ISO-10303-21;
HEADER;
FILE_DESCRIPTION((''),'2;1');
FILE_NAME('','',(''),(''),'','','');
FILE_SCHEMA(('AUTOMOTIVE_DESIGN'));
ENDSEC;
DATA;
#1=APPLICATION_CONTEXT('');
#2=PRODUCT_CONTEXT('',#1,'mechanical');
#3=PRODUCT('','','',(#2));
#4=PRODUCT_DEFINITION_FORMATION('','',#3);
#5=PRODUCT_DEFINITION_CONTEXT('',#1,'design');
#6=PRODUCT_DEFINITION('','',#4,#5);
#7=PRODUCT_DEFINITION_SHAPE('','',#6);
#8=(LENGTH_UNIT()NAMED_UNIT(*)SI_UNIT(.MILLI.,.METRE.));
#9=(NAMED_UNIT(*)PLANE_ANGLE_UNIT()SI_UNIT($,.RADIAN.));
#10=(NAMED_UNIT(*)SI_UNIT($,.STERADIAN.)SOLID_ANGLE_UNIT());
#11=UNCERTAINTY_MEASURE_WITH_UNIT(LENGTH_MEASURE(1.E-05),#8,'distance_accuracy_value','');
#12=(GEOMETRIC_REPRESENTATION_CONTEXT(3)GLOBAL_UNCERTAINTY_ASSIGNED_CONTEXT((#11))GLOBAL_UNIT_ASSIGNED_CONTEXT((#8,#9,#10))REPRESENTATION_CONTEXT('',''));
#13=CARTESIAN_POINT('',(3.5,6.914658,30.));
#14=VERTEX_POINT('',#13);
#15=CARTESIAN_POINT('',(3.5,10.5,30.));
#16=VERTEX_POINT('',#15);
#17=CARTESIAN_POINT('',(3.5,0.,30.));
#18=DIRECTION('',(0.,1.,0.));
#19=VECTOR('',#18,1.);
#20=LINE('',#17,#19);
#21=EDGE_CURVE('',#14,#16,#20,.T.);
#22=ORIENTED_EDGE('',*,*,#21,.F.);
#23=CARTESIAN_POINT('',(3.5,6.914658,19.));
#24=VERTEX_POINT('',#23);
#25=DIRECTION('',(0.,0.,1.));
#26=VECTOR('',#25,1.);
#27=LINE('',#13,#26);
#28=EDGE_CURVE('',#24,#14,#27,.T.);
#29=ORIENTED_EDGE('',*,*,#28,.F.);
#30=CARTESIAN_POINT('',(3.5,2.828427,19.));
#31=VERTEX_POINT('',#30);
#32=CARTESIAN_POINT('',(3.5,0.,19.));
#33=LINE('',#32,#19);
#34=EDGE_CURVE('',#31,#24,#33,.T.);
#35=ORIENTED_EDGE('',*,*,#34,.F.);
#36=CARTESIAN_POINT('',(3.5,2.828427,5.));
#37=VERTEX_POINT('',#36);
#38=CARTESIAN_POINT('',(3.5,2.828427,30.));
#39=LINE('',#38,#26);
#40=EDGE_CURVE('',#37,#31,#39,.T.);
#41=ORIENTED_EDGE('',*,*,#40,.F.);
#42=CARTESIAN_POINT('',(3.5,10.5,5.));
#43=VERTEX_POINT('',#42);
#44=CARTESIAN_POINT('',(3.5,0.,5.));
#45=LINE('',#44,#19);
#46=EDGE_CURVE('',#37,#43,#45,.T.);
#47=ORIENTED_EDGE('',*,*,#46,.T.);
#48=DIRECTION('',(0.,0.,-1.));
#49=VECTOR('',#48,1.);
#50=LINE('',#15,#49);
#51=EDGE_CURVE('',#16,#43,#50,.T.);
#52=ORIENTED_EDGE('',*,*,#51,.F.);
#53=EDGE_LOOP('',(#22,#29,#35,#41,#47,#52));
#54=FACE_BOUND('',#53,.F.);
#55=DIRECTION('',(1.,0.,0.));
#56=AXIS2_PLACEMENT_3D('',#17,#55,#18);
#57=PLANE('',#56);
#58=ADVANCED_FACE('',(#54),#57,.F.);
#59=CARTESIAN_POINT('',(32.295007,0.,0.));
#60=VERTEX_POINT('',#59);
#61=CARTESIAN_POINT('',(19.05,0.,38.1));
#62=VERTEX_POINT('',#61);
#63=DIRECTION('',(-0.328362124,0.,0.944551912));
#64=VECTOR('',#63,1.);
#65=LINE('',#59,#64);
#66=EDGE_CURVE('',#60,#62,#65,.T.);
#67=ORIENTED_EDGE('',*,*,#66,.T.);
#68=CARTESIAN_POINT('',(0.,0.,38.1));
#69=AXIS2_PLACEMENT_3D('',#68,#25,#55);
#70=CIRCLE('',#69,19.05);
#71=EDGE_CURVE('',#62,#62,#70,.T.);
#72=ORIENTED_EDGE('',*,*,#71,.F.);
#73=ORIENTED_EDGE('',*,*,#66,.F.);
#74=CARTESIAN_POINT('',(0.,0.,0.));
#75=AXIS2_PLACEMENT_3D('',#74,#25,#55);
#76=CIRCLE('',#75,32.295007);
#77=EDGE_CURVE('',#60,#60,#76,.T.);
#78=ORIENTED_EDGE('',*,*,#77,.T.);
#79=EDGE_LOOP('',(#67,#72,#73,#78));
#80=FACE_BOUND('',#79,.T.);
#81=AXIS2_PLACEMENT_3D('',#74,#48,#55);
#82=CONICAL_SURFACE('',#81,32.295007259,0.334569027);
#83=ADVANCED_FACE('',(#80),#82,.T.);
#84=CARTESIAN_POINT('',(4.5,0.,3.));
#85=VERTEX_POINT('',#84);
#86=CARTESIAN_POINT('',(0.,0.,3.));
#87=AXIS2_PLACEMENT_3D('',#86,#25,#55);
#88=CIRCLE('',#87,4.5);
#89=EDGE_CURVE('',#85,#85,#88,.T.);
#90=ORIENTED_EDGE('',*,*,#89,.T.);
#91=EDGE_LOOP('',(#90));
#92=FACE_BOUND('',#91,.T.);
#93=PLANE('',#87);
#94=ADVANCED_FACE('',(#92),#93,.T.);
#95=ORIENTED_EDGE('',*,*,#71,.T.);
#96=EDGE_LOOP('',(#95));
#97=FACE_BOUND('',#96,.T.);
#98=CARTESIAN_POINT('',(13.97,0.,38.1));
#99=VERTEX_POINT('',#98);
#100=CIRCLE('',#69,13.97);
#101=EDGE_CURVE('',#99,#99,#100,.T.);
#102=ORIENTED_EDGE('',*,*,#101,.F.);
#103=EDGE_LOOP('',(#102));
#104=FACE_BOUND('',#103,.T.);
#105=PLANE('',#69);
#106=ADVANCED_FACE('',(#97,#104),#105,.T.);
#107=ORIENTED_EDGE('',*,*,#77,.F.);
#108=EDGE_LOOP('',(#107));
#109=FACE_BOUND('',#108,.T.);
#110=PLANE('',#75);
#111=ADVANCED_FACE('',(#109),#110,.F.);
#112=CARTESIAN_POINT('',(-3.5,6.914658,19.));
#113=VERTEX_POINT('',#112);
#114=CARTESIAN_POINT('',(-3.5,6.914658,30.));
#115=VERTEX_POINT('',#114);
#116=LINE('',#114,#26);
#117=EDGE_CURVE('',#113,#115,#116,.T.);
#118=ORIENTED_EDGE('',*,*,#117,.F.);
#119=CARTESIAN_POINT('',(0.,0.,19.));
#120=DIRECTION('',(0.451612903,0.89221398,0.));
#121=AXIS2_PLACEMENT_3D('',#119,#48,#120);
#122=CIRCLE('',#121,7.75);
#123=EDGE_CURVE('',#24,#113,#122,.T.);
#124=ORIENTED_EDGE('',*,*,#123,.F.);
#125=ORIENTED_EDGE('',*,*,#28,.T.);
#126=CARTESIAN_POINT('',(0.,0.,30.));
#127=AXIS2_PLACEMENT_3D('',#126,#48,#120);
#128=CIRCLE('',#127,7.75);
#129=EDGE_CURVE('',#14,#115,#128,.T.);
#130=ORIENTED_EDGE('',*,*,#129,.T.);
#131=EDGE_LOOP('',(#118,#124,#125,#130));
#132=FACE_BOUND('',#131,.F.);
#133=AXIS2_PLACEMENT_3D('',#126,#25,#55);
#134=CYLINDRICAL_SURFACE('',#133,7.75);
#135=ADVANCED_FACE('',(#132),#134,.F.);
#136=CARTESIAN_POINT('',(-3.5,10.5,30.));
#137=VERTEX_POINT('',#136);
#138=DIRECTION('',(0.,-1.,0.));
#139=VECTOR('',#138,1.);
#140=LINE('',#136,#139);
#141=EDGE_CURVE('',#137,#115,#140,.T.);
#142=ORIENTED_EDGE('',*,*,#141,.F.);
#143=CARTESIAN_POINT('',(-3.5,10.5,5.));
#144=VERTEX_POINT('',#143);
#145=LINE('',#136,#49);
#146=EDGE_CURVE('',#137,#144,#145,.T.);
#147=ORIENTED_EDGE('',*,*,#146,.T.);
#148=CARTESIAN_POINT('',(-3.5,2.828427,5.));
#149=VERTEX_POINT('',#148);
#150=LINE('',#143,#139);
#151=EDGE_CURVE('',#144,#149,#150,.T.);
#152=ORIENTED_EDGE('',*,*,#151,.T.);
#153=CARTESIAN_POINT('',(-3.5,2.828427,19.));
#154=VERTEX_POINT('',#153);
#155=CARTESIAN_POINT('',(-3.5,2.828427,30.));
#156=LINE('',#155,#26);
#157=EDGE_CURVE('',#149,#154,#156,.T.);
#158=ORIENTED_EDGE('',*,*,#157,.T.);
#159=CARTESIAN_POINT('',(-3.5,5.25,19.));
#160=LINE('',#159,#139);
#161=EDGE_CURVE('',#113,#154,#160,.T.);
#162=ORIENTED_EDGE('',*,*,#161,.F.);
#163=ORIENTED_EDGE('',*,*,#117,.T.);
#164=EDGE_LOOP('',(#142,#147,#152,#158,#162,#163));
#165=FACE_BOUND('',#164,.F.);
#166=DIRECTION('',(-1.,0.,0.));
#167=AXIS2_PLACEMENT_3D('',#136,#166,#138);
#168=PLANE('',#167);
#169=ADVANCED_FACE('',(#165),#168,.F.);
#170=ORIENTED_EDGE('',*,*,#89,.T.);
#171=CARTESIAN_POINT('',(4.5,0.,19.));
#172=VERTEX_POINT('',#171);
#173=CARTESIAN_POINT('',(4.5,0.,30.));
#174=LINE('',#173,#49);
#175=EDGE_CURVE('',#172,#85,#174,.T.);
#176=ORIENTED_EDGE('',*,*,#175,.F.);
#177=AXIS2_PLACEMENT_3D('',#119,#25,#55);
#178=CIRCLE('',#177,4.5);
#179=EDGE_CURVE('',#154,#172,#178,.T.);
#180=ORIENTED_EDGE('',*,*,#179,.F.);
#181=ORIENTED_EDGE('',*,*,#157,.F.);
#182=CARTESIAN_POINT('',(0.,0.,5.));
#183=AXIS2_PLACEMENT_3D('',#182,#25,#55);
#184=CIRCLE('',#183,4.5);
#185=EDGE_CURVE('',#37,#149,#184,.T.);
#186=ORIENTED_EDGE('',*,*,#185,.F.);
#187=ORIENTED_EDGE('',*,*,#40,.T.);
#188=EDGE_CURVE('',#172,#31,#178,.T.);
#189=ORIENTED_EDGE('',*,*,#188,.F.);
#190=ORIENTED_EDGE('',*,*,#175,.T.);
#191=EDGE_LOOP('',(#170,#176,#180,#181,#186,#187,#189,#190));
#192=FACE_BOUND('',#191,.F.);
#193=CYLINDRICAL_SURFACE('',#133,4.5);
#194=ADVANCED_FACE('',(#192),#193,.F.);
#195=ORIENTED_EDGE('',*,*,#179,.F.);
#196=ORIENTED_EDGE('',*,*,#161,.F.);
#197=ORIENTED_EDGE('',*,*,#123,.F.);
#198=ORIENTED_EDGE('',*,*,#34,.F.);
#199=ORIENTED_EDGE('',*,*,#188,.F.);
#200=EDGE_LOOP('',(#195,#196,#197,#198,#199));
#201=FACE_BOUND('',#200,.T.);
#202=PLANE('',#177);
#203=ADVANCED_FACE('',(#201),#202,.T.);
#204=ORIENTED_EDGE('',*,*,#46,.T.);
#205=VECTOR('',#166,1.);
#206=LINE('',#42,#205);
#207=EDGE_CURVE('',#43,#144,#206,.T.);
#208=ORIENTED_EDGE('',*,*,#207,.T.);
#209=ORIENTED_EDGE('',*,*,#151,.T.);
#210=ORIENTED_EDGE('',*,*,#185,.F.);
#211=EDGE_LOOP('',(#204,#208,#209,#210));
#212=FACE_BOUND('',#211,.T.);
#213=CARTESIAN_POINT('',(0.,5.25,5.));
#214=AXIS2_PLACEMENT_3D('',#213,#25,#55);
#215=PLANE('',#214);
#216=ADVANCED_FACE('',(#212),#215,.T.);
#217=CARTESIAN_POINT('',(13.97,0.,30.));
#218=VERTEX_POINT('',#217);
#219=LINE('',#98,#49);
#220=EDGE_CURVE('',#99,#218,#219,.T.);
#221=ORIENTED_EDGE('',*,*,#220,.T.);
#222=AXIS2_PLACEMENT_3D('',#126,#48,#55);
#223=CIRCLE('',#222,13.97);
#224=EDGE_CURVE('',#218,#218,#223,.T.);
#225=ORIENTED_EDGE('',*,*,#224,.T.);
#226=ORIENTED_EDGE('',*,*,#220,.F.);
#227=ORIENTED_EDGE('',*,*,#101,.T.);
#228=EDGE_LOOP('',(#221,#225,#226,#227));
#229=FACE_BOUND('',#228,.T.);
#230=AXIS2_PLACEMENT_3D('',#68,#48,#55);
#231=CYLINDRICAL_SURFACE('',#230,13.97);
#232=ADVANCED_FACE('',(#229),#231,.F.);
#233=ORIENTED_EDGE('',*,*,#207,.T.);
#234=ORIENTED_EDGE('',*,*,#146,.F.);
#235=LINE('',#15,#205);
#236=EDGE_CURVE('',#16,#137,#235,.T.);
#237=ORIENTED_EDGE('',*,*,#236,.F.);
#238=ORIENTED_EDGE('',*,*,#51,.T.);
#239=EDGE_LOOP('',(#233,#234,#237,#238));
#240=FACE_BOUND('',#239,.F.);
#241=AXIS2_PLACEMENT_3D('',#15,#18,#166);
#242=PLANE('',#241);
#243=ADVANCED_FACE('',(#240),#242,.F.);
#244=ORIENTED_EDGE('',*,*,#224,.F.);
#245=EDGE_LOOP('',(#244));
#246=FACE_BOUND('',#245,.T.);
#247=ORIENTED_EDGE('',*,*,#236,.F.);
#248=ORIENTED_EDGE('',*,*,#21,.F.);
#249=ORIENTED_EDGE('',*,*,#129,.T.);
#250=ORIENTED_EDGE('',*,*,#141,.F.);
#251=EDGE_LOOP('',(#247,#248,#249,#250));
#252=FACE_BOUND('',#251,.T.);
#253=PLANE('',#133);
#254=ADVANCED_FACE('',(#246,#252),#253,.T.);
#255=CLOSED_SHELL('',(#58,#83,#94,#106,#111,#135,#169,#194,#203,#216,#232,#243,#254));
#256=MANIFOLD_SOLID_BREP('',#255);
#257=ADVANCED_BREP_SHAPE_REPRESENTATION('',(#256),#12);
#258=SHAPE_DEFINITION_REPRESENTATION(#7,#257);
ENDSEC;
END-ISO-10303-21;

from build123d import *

# Parameters (mm, degrees)
F3_R      = 14
F4_DEPTH  = 30
F6_R      = 4.5
F7_DEPTH  = 27
F5_R      = 7.75
F8_DEPTH  = 11
F10_DEPTH = 25


# Not quite as in the source:
# - a feature names something its author has since deleted; it is built from what else it names


with BuildPart() as f2:
    # F0 (on Front) → F2 (revolve)
    with BuildSketch(Plane.XZ):
        Polygon((32.2950072587, 0), (19.05, 38.1), (13.97, 38.1), (13.97, 0), align=None)
    revolve(axis=Axis((0, 0, 18.1650817394), (0, 0, 1)))

    # F3 (on Top) → F4 (join)
    with BuildSketch(Plane.XY):
        Circle(F3_R)
    extrude(amount=F4_DEPTH)

    # F6 (on face) → F7 (cut)
    with BuildSketch(Plane.XY.offset(30)):
        Circle(F6_R)
    extrude(amount=-F7_DEPTH, mode=Mode.SUBTRACT)

    # F5 (on face) → F8 (cut)
    with BuildSketch(Plane.XY.offset(30)):
        Circle(F5_R)
    extrude(amount=-F8_DEPTH, mode=Mode.SUBTRACT)

    # F9 (on face) → F10 (cut)
    with BuildSketch(Plane.XY.offset(30)):
        Polygon((-3.5, 0), (0, 0), (3.5, 0), (3.5, 10.5), (-3.5, 10.5), align=None)
    extrude(amount=-F10_DEPTH, mode=Mode.SUBTRACT)


solid = f2.part
